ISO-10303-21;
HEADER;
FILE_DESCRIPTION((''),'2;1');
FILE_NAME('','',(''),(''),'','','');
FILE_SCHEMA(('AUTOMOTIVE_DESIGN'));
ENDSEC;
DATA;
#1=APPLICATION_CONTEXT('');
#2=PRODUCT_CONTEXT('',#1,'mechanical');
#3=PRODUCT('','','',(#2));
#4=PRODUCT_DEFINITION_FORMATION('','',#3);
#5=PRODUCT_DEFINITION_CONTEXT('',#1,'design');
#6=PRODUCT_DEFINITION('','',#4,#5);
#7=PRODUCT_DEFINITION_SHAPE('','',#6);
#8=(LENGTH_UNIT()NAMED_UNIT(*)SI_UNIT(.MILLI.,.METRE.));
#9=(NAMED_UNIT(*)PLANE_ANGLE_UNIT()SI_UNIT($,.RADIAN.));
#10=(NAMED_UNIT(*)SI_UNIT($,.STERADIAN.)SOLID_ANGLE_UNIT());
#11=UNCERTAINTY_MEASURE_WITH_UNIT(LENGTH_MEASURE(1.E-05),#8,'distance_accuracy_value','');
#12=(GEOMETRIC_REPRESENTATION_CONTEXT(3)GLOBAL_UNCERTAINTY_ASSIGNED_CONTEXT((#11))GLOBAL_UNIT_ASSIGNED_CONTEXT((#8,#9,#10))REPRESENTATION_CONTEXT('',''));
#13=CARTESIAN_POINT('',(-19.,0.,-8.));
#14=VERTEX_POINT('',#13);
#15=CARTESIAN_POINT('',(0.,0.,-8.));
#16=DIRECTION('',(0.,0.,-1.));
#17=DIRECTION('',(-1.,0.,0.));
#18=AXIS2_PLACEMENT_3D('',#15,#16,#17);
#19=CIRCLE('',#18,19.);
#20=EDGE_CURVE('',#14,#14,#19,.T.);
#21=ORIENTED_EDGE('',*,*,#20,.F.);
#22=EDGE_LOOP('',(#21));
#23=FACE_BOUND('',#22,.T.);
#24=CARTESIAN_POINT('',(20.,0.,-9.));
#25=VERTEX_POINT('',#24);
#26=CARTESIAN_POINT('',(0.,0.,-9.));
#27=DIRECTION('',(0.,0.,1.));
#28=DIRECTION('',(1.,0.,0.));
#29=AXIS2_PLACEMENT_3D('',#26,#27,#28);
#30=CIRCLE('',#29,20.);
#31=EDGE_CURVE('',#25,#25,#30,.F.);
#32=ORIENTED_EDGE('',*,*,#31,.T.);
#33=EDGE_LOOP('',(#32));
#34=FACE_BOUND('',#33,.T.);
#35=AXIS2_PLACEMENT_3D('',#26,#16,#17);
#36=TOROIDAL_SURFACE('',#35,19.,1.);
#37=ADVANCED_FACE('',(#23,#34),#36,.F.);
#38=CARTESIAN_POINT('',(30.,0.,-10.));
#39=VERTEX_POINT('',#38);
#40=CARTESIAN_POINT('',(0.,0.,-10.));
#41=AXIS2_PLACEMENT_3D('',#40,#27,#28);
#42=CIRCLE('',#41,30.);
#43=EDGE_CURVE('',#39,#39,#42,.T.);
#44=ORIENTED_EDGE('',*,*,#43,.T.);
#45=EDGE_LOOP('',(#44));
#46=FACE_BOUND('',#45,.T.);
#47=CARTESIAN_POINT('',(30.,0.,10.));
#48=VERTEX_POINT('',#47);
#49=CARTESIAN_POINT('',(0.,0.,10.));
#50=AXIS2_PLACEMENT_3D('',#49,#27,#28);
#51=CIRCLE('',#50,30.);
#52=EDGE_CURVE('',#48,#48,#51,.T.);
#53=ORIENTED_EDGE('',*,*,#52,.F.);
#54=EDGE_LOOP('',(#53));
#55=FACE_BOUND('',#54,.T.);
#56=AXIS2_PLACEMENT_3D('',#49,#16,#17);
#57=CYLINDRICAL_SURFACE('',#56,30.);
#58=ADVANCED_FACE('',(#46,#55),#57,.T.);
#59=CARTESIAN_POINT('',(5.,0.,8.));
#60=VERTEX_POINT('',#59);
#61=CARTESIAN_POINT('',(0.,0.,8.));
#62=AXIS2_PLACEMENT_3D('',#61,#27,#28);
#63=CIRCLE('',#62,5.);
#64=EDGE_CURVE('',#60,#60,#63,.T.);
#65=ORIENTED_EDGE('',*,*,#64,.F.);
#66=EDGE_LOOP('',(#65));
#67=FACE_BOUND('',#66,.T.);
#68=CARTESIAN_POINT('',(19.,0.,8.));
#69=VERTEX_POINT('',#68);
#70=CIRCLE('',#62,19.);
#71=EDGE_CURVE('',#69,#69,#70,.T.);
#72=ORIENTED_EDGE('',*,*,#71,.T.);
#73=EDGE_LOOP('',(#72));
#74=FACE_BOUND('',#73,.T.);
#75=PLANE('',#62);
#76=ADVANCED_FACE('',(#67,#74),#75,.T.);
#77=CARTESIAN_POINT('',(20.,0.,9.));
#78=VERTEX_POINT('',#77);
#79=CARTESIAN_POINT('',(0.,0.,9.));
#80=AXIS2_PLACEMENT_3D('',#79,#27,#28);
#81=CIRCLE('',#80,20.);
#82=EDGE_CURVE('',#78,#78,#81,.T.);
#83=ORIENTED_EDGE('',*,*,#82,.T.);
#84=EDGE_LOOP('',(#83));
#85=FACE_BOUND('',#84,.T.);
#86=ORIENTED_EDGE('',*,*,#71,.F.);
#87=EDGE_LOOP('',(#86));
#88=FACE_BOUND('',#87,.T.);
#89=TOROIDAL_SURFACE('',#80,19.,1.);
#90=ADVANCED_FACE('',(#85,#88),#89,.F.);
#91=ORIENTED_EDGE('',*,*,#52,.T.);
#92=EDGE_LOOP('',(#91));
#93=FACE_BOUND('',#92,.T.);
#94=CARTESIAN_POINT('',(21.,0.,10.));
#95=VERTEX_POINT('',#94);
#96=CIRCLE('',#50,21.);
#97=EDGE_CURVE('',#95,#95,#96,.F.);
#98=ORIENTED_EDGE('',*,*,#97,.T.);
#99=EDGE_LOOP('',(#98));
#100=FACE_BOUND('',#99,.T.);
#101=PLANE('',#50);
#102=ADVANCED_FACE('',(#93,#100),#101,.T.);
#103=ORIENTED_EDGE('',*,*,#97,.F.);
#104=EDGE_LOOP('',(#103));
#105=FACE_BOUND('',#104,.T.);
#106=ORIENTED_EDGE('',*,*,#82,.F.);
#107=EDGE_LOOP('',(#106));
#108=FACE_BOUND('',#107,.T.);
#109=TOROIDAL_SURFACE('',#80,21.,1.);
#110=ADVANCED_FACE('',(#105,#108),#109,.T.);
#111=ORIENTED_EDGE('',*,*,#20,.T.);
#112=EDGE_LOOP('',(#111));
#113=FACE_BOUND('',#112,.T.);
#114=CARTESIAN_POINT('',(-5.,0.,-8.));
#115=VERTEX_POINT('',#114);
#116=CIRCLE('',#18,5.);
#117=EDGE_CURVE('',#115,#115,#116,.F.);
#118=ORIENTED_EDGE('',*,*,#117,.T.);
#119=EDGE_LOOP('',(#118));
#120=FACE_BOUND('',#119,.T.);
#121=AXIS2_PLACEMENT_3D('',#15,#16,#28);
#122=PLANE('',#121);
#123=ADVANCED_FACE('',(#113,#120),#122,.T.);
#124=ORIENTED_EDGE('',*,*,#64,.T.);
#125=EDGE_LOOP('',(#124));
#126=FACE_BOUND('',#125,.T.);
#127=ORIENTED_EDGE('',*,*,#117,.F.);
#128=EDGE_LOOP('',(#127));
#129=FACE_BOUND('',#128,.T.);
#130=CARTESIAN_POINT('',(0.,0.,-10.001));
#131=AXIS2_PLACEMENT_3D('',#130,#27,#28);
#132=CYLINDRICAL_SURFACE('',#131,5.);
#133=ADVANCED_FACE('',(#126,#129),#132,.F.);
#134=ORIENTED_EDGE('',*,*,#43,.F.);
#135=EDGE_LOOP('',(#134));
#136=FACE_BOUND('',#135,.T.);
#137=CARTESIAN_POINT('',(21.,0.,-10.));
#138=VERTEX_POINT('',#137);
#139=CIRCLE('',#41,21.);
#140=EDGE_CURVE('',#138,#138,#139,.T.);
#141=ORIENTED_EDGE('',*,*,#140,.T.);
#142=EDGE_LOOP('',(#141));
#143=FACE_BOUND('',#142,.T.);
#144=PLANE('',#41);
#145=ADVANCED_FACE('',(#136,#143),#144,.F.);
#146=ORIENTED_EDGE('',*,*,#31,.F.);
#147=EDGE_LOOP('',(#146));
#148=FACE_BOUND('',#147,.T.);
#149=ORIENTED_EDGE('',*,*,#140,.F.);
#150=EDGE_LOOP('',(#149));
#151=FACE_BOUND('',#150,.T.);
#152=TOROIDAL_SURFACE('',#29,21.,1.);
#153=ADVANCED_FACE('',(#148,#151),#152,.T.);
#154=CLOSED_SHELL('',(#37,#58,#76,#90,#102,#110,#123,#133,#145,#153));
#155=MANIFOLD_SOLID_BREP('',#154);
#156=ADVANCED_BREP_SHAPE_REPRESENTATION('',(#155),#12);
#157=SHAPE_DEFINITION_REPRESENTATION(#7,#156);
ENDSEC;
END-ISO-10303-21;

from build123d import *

# Parameters (mm, degrees)
SKETCH1_R           = 30
BOSS_EXTRUDE1_DEPTH = 10
SKETCH2_R           = 20
CUT_EXTRUDE1_DEPTH  = 2
FILLET1_R           = 1
CUT_EXTRUDE2_REACH  = 48.087
SKETCH3_R           = 5


with BuildPart() as part:
    # Sketch1 → Boss-Extrude1 (new, symmetric)
    with BuildSketch(Plane.XY):
        Circle(SKETCH1_R)
    extrude(amount=BOSS_EXTRUDE1_DEPTH, both=True)

    # Sketch2 → Cut-Extrude1 (cut)
    with BuildSketch(Plane.XY.offset(10)):
        Circle(SKETCH2_R)
    cut_extrude1 = extrude(amount=-CUT_EXTRUDE1_DEPTH, mode=Mode.SUBTRACT)

    # Mirror1: Cut-Extrude1 across plane
    add(cut_extrude1.mirror(Plane.XY), mode=Mode.SUBTRACT)

    # Fillet1
    fillet1_edges = [part.edges().sort_by_distance(p)[0] for p in [
        (-20, 0, -10),
        (-20, 0, -8),
        (-20, 0, 8),
        (-20, 0, 10),
    ]]
    fillet(fillet1_edges, radius=FILLET1_R - 0.0001)  # a hair under: the kernel refuses the full size

    # Sketch3 → Cut-Extrude2 (cut, up to next)
    with BuildSketch(Plane.XY.offset(8), mode=Mode.PRIVATE) as cut_extrude2_sk1:
        Circle(SKETCH3_R)
    cut_extrude2_tool1 = extrude(cut_extrude2_sk1.sketch, amount=-CUT_EXTRUDE2_REACH, mode=Mode.PRIVATE) & part.part
    add(cut_extrude2_tool1.solids().sort_by_distance((0, 0, 8))[0], mode=Mode.SUBTRACT)


solid = part.part
